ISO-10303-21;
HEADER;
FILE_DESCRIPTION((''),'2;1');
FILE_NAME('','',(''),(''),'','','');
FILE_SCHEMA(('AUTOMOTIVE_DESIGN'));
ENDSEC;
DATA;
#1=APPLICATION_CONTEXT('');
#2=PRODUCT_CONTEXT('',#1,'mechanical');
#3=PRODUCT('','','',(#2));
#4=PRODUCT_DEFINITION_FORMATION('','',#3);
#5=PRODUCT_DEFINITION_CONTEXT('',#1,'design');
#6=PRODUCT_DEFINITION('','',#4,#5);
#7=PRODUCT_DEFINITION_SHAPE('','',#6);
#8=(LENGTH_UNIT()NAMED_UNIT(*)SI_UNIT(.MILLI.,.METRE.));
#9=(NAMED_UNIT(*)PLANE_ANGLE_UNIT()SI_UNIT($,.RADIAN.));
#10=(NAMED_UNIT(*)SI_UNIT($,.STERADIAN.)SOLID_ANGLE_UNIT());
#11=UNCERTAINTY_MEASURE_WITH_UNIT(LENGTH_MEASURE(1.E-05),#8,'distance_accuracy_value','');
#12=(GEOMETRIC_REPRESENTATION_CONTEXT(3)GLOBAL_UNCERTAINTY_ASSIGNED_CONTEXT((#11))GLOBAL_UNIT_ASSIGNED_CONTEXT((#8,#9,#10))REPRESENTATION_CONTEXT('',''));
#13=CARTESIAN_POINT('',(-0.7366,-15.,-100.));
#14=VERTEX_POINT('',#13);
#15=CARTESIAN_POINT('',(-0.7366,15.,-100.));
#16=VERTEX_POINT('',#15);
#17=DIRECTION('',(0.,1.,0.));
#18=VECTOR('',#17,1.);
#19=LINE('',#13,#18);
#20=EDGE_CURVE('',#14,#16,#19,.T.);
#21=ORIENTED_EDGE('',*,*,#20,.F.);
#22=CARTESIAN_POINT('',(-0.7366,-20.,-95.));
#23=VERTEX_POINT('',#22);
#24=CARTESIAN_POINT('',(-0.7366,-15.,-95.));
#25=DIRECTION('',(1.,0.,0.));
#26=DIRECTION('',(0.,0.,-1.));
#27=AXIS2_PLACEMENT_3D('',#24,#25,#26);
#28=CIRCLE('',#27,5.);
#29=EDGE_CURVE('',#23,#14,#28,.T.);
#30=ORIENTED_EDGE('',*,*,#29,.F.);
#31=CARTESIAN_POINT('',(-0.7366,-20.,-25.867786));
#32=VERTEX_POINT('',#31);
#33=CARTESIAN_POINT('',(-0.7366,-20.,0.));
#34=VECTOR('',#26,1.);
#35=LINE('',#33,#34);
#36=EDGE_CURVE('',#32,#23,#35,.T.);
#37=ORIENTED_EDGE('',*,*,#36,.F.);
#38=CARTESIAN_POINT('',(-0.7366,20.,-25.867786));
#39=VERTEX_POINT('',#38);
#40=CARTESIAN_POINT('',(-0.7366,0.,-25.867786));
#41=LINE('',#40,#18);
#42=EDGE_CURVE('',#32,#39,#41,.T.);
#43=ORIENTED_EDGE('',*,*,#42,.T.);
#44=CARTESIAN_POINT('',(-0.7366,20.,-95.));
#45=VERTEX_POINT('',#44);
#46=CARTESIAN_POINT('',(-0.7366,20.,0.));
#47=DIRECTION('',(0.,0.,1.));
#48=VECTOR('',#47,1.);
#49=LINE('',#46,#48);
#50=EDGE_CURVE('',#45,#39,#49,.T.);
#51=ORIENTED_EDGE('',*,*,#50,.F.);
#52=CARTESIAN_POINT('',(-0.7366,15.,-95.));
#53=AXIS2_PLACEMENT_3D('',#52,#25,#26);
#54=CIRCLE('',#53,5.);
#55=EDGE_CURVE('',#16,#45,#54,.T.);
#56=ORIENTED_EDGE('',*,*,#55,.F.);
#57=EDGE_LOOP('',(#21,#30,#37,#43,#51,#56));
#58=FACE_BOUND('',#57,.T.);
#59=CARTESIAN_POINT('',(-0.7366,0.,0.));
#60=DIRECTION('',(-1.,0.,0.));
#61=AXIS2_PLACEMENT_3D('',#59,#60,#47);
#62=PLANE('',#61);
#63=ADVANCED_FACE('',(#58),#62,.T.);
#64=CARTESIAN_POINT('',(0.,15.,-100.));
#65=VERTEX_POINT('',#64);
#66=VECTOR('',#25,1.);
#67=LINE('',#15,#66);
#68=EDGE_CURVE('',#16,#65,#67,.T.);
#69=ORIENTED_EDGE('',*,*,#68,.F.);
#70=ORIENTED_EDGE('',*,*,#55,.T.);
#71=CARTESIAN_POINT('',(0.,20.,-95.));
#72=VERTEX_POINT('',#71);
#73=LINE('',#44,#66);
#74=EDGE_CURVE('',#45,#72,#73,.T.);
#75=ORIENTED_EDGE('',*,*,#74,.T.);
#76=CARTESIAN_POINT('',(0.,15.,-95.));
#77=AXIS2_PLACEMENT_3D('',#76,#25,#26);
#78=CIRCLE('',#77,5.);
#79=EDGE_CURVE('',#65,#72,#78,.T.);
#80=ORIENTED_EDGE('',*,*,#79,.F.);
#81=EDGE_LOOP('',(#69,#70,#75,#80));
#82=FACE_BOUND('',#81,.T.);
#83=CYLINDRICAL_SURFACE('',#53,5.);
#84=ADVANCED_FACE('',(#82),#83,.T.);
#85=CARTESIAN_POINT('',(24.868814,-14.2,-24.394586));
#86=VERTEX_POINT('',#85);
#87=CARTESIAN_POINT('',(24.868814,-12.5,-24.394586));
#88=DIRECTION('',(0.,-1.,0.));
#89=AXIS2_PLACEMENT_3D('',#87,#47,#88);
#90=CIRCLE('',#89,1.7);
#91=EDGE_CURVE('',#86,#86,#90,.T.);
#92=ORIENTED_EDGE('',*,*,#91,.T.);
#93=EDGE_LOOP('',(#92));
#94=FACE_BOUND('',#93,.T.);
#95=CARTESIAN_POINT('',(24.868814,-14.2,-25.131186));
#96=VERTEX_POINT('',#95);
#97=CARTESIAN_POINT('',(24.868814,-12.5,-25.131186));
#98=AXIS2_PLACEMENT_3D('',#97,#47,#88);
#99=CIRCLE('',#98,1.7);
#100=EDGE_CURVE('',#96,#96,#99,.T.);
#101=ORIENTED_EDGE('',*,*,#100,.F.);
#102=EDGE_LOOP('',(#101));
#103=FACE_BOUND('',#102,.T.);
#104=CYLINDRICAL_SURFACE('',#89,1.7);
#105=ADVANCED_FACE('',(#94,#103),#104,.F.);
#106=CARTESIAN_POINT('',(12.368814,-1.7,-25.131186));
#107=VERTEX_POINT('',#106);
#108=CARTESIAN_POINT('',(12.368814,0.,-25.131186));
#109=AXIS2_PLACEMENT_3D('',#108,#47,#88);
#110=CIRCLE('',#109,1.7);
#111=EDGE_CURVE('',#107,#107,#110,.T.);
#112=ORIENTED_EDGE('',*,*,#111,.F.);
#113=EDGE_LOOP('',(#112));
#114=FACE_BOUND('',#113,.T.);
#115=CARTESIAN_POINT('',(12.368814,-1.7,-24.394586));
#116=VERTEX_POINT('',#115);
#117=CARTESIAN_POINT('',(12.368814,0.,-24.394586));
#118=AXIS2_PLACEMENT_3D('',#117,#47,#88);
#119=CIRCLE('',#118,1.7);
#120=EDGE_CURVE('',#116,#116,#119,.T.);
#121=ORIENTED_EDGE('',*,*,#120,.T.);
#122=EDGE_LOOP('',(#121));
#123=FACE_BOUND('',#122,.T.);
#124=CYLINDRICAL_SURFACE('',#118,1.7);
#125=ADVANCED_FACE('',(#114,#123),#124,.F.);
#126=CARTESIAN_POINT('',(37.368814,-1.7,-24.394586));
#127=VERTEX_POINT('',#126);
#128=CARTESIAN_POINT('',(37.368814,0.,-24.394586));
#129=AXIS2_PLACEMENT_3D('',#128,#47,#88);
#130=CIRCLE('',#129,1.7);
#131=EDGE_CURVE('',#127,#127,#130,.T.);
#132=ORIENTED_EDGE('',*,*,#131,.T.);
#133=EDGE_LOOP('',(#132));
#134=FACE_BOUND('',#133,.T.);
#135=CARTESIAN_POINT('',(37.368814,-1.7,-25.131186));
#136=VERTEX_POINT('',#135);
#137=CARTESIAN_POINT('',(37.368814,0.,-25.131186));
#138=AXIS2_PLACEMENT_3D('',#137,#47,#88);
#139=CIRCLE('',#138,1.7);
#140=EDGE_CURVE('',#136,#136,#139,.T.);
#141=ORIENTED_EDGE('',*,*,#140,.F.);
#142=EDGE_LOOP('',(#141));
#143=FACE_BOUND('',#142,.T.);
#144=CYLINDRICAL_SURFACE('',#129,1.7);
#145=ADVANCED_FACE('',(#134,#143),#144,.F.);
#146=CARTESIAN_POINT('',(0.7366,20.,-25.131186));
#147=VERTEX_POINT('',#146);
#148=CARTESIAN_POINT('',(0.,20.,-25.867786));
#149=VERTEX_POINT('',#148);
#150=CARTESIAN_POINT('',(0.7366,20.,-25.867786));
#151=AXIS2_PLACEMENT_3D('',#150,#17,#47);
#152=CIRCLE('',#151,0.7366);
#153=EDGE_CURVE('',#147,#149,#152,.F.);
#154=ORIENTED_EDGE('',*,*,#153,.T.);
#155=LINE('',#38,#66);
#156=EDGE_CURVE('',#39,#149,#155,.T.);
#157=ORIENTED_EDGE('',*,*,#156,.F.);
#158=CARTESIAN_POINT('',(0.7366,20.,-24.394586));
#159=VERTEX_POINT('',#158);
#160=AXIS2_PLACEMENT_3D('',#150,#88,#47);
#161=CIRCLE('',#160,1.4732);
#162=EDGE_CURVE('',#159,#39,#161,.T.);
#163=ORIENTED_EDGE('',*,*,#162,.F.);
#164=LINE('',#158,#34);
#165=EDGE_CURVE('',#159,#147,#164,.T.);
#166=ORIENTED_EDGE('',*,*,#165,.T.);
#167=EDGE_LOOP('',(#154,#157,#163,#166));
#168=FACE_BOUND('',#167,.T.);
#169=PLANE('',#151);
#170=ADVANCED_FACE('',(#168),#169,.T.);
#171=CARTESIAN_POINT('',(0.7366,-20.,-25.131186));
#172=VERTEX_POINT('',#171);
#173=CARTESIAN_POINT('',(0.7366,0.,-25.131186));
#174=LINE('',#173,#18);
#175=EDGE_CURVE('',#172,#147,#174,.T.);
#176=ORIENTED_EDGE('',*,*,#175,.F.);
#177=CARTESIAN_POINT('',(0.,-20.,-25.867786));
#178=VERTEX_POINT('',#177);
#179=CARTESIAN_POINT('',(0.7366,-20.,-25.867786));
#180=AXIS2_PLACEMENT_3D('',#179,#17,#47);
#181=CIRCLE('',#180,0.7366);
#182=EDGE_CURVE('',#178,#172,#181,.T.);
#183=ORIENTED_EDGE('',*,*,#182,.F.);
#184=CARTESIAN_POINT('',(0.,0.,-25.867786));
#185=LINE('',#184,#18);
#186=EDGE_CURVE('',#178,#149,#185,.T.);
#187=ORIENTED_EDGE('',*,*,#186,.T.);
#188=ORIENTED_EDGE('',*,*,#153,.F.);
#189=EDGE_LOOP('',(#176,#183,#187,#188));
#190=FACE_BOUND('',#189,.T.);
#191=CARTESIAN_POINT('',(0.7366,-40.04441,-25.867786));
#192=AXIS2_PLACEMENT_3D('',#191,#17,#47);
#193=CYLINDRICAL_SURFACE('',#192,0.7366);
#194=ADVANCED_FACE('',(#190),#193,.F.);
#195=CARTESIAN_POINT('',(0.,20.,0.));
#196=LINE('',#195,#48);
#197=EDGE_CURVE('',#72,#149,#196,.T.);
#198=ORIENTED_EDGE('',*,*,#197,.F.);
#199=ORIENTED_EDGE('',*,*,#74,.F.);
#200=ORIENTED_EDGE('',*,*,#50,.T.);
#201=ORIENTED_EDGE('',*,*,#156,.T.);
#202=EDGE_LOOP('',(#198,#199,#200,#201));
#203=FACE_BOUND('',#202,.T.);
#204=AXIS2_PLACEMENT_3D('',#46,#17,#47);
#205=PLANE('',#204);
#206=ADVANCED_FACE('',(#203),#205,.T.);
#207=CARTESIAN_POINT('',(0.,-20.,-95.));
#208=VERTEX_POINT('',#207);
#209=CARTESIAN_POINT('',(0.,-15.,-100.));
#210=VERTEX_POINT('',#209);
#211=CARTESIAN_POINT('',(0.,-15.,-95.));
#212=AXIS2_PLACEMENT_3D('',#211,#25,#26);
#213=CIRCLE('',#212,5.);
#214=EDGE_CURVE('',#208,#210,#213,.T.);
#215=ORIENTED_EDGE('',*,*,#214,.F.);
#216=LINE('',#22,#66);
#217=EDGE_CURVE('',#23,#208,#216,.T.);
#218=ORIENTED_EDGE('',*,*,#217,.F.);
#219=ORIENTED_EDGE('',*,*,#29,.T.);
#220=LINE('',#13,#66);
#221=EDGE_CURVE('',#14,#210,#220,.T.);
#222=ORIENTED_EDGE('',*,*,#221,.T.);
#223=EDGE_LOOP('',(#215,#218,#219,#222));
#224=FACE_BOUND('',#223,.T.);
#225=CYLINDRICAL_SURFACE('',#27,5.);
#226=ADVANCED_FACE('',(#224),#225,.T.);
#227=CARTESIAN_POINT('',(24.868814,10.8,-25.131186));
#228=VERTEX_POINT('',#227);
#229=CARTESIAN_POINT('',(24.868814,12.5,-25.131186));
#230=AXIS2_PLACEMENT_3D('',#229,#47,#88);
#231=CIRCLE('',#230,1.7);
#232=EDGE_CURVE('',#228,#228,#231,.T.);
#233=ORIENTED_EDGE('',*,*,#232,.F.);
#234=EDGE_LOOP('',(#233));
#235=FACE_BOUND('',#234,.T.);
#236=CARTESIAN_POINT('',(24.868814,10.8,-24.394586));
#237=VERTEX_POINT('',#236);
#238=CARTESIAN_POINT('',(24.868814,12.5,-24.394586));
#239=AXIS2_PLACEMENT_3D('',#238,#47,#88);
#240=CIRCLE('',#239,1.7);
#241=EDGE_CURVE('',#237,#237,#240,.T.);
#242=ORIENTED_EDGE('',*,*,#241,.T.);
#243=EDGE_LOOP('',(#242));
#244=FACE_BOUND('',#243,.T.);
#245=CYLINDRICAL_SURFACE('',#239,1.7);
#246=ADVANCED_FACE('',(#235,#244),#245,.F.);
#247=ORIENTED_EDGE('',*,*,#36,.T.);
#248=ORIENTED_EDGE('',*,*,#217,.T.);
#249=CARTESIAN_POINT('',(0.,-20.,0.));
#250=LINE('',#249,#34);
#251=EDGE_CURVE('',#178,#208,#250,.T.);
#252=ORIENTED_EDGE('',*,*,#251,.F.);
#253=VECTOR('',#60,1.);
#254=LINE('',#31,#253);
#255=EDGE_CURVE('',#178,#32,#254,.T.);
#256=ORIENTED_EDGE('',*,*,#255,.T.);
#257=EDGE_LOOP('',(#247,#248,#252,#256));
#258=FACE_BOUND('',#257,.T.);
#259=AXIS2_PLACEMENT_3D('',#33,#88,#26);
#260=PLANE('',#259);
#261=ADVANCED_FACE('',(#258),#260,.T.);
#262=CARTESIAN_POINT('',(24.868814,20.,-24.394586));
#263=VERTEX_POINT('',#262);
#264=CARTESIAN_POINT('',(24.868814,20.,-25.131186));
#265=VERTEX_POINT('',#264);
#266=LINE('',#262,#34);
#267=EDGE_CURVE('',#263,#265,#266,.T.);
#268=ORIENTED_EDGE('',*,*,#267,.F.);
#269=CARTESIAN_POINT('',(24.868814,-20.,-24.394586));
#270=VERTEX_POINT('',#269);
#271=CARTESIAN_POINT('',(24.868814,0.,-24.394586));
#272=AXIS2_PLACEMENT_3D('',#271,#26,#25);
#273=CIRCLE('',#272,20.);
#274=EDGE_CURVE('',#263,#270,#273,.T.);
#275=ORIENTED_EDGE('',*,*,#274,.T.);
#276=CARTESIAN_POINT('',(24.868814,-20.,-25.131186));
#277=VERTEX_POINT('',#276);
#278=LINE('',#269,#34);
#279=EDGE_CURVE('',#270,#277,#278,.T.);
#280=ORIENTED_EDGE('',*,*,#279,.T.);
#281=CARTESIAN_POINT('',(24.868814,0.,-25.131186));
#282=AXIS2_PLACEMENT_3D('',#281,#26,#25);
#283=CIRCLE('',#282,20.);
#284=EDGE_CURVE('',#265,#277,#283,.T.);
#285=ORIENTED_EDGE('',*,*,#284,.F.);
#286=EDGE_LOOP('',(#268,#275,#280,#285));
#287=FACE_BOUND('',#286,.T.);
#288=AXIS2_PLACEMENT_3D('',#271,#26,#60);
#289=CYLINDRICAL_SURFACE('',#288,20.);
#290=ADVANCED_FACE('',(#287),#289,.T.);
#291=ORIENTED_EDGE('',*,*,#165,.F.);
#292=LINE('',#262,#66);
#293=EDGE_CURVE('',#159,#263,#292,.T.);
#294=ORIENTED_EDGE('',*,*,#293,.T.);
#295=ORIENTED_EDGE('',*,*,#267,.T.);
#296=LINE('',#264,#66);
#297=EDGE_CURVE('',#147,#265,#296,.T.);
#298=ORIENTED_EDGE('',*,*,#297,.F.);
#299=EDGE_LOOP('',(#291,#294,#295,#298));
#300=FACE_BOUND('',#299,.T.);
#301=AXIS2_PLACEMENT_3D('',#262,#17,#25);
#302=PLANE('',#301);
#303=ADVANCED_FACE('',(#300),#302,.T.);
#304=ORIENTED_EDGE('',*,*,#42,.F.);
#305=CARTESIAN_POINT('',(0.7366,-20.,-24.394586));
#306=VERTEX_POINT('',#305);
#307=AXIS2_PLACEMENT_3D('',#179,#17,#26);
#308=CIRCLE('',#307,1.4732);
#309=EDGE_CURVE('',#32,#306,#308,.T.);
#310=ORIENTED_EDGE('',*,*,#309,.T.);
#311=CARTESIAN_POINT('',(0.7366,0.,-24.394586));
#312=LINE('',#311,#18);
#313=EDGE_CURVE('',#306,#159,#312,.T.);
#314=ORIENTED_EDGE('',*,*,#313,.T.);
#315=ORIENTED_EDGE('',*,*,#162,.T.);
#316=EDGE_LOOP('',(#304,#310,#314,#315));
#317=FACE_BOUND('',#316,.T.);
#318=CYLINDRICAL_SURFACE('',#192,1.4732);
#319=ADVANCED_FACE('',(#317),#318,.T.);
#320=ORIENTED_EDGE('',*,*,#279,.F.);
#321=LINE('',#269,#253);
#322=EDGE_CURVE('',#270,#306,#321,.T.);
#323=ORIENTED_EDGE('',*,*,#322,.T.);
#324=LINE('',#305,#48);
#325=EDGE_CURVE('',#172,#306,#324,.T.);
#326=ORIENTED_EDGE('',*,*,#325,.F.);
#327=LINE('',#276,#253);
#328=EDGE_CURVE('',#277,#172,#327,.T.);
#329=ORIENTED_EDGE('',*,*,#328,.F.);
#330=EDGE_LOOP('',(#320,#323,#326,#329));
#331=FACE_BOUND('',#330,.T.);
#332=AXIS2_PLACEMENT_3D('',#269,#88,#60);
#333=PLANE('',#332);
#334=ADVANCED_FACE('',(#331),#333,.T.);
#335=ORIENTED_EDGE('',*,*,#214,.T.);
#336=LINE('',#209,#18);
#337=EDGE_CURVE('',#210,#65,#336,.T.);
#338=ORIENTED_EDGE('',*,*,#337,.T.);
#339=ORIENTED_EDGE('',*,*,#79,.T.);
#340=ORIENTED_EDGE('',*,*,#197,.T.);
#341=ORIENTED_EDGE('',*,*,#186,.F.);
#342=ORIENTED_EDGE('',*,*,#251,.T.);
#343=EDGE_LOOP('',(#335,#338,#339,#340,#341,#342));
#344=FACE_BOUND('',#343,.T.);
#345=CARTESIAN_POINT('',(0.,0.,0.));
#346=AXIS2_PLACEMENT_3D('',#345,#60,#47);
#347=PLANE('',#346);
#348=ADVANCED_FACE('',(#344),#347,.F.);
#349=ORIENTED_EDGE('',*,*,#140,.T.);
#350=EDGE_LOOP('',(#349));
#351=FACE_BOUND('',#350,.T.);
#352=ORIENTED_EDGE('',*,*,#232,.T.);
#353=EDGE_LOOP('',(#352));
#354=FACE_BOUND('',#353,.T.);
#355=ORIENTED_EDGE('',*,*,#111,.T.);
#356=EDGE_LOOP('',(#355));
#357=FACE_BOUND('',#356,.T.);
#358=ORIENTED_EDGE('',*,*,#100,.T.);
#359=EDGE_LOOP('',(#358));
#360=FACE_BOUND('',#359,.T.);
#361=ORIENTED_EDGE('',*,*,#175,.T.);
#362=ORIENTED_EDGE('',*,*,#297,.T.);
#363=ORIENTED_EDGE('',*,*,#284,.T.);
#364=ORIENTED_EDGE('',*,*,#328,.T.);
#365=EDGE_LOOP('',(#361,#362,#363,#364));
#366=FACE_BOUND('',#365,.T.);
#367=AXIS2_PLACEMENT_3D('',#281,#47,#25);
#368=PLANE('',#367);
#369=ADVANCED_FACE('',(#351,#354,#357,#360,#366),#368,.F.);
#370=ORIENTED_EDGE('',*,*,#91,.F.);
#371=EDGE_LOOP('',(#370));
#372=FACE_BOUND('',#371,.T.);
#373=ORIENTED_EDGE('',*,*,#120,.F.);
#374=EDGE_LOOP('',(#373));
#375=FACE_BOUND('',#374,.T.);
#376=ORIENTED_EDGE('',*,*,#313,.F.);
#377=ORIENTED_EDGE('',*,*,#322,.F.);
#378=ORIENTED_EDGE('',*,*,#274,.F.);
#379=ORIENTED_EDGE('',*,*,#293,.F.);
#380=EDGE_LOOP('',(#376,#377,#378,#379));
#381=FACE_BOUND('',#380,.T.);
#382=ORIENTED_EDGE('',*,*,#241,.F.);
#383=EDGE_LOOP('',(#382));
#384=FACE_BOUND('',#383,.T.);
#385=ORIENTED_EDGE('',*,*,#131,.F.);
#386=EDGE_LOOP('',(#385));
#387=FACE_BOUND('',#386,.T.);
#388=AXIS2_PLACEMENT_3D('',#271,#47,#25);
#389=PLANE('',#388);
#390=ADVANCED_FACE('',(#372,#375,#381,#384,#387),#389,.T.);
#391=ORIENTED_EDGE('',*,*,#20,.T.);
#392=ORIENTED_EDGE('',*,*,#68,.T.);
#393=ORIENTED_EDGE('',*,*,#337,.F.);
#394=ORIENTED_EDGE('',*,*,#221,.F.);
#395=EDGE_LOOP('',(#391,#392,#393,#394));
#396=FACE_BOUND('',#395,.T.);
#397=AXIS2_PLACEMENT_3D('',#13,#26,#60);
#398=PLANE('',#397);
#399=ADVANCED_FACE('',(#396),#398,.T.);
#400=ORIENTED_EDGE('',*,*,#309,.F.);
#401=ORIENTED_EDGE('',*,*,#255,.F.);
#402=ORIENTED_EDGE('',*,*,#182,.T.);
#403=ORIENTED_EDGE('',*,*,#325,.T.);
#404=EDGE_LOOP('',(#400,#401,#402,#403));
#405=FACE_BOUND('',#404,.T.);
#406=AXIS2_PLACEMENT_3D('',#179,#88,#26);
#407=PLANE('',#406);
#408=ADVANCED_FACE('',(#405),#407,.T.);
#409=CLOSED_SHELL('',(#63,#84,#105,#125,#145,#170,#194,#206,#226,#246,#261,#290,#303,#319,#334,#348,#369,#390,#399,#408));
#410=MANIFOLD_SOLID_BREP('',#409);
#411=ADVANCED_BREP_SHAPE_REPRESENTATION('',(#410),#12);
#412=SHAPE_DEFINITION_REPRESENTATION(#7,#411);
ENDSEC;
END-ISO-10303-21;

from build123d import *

# Parameters (mm, degrees)
BASE_FLANGE1_DEPTH       = 0.7366
SKETCHED_START           = -24.545942999
SKETCHED_BEND1_OUTLINE_W = 0.7366
SKETCHED_BEND1_OUTLINE_H = 40
SKETCHED_BEND1_DEPTH     = 45.545942999
SKETCHED_START_2         = -25.131186431
SKETCHED_BEND1_2_DEPTH   = 0.004036568
SKETCHED_START_3         = -25.867786431
SKETCHED_BEND1_3_DEPTH   = 1.4732
SKETCHED_START_4         = -20
SKETCHED_BEND1_4_DEPTH   = 40
M3_CLEARANCE_HOLE1_D     = 3.4
M3_CLEARANCE_HOLE1_DEPTH = 0.7366
M3_CLEARANCE_HOLE1_TIP   = 1.021463052


with BuildPart() as part:
    # Base-Flange1: sheet metal written as solids
    # Sketch1 → Base-Flange1 (new body)
    with BuildSketch(Plane.YZ):
        with BuildLine():
            Line((-20, 0), (-20, -95))
            ThreePointArc((-20, -95), (-18.535533906, -98.535533906), (-15, -100))
            Line((-15, -100), (15, -100))
            ThreePointArc((15, -100), (18.535533906, -98.535533906), (20, -95))
            Line((20, -95), (20, 0))
            ThreePointArc((20, 0), (0, 20), (-20, 0))
        make_face()
    extrude(amount=-BASE_FLANGE1_DEPTH)

    # Sketched Bend1: read off the stored shape, not the designer's step
    # Sketched Bend1 outline → Sketched Bend1 (cut)
    with BuildSketch(Plane.XY.offset(SKETCHED_START)):
        with Locations((-0.3683, 0)):
            Rectangle(SKETCHED_BEND1_OUTLINE_W, SKETCHED_BEND1_OUTLINE_H)
    extrude(amount=SKETCHED_BEND1_DEPTH, mode=Mode.SUBTRACT)

    # Sketched Bend1 2 outline → Sketched Bend1 2 (add)
    with BuildSketch(Plane.XY.offset(SKETCHED_START_2)):
        with BuildLine():
            ThreePointArc((24.868813569, -20), (44.868813569, 0), (24.868813569, 20))
            Line((24.868813569, 20), (0, 20))
            Line((0, 20), (0, -20))
            Line((0, -20), (24.868813569, -20))
        make_face()
    extrude(amount=SKETCHED_BEND1_2_DEPTH)

    # Sketched Bend1 3 outline → Sketched Bend1 3 (add)
    with BuildSketch(Plane.XY.offset(SKETCHED_START_3)):
        with BuildLine():
            ThreePointArc((24.868813569, -20), (44.868813569, 0), (24.868813569, 20))
            Line((24.868813569, 20), (0, 20))
            Line((0, 20), (0, -20))
            Line((0, -20), (24.868813569, -20))
        make_face()
    extrude(amount=SKETCHED_BEND1_3_DEPTH)

    # Sketched Bend1 4 outline → Sketched Bend1 4 (cut)
    with BuildSketch(Plane(origin=(0, 0, 0), x_dir=(1, 0, 0), z_dir=(0, 1, 0)).offset(SKETCHED_START_4)):
        with BuildLine():
            ThreePointArc((0, 25.867786431), (0.215745145, 25.346931576), (0.7366, 25.131186431))
            Line((0.7366, 25.131186431), (46, 25.131186431))
            Line((46, 25.131186431), (46, 25.867786431))
            Line((46, 25.867786431), (0, 25.867786431))
        make_face()
        with BuildLine():
            Line((46, 23), (46, 24.394586426))
            Line((46, 24.394586426), (0.7366, 24.394586431))
            ThreePointArc((0.7366, 24.394586431), (-0.30510971, 24.826076721), (-0.7366, 25.867786431))
            Line((-0.7366, 25.867786431), (-0.7366, 27))
            Line((-0.7366, 27), (-2, 27))
            Line((-2, 27), (-2, 24.545942999))
            Line((-2, 24.545942999), (0, 24.545942999))
            Line((0, 24.545942999), (0, 23))
            Line((0, 23), (46, 23))
        make_face()
    extrude(amount=SKETCHED_BEND1_4_DEPTH, mode=Mode.SUBTRACT)

    # M3 Clearance Hole1
    with Locations(Plane(origin=(0, 0, -24.394586431), x_dir=(0, -1, 0), z_dir=(0, 0, 1))):
        with Locations((0, 37.368813569), (-12.5, 24.868813569), (0, 12.368813569), (12.5, 24.868813569)):
            Hole(M3_CLEARANCE_HOLE1_D / 2, depth=M3_CLEARANCE_HOLE1_DEPTH)
            with Locations((0, 0, -(M3_CLEARANCE_HOLE1_DEPTH + M3_CLEARANCE_HOLE1_TIP / 2))):  # 118° drill point
                Cone(0, M3_CLEARANCE_HOLE1_D / 2, M3_CLEARANCE_HOLE1_TIP, mode=Mode.SUBTRACT)


solid = part.part
